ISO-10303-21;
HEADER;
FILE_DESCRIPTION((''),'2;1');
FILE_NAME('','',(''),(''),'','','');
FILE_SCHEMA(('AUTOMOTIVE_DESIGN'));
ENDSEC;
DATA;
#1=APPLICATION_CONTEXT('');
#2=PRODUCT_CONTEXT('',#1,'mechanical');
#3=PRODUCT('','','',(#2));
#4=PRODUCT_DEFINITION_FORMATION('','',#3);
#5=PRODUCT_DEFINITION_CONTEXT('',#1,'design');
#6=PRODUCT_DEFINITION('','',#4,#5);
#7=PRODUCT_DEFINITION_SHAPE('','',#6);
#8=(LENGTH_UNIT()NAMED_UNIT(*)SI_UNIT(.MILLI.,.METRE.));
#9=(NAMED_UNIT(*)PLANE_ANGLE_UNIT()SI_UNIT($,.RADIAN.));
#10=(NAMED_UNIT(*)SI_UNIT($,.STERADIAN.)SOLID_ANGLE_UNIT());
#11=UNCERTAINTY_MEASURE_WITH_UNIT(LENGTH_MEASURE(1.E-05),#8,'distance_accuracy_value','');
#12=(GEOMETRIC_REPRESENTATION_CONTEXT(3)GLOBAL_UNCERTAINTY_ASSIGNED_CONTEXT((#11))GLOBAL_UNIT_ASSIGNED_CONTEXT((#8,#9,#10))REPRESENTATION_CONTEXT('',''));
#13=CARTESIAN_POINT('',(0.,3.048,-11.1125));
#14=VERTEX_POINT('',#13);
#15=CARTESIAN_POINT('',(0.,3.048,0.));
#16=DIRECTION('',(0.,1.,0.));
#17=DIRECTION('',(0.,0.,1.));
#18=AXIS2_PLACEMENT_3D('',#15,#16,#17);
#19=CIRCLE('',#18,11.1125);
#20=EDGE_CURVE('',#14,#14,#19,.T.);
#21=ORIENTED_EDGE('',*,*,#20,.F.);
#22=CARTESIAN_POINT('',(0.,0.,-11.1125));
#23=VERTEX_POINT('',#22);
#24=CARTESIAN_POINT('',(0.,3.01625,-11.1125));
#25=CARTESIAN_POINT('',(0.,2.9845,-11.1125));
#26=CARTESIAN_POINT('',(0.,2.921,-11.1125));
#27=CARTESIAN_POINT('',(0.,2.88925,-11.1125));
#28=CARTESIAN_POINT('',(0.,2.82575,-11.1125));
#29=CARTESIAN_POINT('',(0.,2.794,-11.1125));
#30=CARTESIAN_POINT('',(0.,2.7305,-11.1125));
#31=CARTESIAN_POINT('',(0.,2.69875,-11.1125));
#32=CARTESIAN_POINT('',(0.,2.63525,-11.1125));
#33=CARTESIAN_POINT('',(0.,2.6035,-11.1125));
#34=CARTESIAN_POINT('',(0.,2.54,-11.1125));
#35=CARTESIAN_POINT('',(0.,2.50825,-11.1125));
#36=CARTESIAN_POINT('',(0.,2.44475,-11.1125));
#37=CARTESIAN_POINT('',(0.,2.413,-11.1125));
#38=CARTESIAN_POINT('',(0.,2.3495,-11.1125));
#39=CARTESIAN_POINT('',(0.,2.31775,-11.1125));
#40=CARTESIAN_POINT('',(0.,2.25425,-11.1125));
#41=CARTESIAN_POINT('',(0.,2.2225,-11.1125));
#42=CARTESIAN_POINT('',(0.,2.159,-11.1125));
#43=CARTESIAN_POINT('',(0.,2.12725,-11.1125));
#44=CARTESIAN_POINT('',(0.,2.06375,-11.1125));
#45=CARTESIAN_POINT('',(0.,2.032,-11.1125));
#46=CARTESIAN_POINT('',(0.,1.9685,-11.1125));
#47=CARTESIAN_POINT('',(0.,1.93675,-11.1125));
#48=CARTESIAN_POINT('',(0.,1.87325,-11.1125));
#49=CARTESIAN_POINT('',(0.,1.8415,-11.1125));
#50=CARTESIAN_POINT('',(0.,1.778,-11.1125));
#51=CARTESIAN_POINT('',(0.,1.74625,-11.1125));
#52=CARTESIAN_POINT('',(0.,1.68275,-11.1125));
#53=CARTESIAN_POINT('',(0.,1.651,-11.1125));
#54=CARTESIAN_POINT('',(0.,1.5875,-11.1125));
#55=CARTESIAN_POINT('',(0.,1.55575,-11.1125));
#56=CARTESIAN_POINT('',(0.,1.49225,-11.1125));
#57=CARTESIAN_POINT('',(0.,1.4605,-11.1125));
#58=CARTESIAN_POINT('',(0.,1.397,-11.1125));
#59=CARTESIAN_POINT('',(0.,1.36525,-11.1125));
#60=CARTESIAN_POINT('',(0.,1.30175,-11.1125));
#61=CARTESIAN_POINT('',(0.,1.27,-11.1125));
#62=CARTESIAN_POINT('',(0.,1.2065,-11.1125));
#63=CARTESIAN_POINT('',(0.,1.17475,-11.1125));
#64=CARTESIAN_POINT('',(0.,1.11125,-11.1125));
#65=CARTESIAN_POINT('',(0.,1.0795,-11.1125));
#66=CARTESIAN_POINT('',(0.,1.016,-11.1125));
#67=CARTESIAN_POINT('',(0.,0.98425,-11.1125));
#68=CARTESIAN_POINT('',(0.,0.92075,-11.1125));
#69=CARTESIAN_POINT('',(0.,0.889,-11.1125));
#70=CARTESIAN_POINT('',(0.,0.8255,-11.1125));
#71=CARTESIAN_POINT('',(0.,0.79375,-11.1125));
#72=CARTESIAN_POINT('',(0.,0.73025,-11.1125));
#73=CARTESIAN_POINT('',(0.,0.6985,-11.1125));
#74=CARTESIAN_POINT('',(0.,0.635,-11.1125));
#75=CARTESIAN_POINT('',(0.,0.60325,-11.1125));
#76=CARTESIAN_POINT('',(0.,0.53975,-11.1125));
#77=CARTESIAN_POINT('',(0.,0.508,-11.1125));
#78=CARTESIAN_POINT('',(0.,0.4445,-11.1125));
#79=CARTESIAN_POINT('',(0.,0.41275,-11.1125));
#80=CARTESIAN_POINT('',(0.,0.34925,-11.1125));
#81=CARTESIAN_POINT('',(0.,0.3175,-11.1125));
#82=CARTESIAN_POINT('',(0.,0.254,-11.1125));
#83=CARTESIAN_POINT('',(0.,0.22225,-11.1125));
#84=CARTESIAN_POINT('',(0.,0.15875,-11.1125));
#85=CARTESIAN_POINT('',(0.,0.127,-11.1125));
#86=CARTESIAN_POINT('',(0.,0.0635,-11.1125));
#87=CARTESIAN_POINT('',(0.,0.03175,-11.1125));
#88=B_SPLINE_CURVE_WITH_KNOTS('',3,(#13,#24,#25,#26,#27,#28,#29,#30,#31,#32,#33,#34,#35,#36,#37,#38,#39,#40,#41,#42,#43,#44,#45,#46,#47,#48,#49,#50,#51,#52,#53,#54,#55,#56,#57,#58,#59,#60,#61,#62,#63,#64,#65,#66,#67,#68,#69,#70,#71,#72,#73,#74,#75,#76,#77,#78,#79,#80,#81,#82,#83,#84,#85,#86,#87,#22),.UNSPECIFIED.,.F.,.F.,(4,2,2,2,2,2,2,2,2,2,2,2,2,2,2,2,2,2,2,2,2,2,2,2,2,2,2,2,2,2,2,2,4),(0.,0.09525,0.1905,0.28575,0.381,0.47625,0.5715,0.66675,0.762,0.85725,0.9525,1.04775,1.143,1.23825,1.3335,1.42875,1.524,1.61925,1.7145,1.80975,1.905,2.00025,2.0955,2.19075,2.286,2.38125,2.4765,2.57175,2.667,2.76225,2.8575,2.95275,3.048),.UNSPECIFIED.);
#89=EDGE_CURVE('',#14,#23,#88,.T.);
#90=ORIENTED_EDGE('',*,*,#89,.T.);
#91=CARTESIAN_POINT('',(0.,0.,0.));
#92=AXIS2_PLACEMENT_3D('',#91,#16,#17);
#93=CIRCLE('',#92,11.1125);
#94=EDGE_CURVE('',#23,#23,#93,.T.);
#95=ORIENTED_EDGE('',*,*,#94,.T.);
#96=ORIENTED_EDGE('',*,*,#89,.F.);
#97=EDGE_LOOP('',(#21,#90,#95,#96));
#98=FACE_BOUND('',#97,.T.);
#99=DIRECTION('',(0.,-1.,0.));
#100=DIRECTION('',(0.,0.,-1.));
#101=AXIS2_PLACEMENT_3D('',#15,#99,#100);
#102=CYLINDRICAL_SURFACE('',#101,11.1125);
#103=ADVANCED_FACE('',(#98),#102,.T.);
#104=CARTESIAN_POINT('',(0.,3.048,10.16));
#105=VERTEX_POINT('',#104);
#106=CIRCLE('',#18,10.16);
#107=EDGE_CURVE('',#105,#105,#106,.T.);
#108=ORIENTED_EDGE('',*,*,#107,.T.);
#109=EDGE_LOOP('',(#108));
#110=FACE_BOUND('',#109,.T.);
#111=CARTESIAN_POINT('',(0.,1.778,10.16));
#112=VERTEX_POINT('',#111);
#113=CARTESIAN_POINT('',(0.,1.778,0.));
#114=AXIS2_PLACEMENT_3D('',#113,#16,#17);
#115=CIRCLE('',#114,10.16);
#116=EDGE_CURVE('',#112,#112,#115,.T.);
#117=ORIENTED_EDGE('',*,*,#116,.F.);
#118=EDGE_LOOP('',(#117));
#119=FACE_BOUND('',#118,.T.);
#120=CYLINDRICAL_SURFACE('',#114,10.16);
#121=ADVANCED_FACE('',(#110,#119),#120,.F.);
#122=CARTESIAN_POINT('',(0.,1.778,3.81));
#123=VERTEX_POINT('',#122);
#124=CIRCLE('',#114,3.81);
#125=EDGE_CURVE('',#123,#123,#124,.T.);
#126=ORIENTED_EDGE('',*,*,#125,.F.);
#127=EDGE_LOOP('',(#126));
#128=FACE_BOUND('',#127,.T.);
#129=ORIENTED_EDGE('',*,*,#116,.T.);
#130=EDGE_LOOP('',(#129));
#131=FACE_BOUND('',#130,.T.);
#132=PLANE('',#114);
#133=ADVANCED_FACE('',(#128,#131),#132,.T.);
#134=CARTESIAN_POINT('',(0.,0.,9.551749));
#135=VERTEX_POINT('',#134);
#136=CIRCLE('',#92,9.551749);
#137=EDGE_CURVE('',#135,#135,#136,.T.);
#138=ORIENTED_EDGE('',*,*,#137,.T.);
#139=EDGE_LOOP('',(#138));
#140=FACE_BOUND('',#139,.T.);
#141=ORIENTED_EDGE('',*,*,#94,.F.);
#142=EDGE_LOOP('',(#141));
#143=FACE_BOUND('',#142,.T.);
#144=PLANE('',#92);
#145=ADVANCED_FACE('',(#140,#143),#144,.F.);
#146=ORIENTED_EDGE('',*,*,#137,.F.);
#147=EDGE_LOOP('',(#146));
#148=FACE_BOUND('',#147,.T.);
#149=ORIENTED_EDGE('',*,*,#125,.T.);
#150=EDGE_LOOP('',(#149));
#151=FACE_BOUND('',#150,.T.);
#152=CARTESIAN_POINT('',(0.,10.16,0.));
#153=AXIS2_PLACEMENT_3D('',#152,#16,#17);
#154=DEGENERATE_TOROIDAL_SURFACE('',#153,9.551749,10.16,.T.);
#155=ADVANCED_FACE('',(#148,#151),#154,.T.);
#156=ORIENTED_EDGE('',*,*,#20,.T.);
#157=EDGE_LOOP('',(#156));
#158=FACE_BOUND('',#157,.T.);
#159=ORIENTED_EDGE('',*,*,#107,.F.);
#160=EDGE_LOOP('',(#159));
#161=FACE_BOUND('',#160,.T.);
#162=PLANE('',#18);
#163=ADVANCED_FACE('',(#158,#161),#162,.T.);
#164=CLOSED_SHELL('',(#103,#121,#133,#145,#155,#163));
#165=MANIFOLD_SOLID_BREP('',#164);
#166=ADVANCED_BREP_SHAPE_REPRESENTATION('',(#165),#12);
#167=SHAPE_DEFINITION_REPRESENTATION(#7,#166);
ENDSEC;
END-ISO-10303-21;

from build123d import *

# Parameters (mm, degrees)
SKETCH2_R           = 11.1125
BOSS_EXTRUDE1_DEPTH = 3.048
SKETCH3_R           = 10.16
CUT_EXTRUDE1_DEPTH  = 1.27
SKETCH4_R           = 3.81
CUT_EXTRUDE2_DEPTH  = 2.54
FILLET1_R           = 10.16


with BuildPart() as part:
    # Sketch2 → Boss-Extrude1 (new body)
    with BuildSketch(Plane(origin=(0, 0, 0), x_dir=(1, 0, 0), z_dir=(0, 1, 0))):
        with Locations(Location((0, 0, 0), (0, 0, 90))):
            Circle(SKETCH2_R)
    extrude(amount=BOSS_EXTRUDE1_DEPTH)

    # Sketch3 → Cut-Extrude1 (cut)
    with BuildSketch(Plane(origin=(0, 3.048, 0), x_dir=(1, 0, 0), z_dir=(0, 1, 0))):
        with Locations(Location((0, 0, 0), (0, 0, 270))):
            Circle(SKETCH3_R)
    extrude(amount=-CUT_EXTRUDE1_DEPTH, mode=Mode.SUBTRACT)

    # Sketch4 → Cut-Extrude2 (cut)
    with BuildSketch(Plane(origin=(0, 0, 0), x_dir=(-1, 0, 0), z_dir=(0, -1, 0))):
        with Locations(Location((0, 0, 0), (0, 0, 90))):
            Circle(SKETCH4_R)
    extrude(amount=-CUT_EXTRUDE2_DEPTH, mode=Mode.SUBTRACT)

    # Fillet1
    # the kernel refuses this fillet: 10.16 mm, written as the material it takes off along each edge
    with BuildSketch(Plane(origin=(0, 0, 0), x_dir=(0, 0, -1), z_dir=(-1, 0, 0))) as fillet1_piece_1:
        with BuildLine():
            CenterArc((9.551748514, -10.16), FILLET1_R, 90, 34.41150867)
            Line((3.81, -1.778), (3.81, 0))
            Line((3.81, 0), (9.551748514, 0))
        make_face()
    revolve(axis=Axis((0, 0, 0), (0, -1, 0)), mode=Mode.SUBTRACT)


solid = part.part
